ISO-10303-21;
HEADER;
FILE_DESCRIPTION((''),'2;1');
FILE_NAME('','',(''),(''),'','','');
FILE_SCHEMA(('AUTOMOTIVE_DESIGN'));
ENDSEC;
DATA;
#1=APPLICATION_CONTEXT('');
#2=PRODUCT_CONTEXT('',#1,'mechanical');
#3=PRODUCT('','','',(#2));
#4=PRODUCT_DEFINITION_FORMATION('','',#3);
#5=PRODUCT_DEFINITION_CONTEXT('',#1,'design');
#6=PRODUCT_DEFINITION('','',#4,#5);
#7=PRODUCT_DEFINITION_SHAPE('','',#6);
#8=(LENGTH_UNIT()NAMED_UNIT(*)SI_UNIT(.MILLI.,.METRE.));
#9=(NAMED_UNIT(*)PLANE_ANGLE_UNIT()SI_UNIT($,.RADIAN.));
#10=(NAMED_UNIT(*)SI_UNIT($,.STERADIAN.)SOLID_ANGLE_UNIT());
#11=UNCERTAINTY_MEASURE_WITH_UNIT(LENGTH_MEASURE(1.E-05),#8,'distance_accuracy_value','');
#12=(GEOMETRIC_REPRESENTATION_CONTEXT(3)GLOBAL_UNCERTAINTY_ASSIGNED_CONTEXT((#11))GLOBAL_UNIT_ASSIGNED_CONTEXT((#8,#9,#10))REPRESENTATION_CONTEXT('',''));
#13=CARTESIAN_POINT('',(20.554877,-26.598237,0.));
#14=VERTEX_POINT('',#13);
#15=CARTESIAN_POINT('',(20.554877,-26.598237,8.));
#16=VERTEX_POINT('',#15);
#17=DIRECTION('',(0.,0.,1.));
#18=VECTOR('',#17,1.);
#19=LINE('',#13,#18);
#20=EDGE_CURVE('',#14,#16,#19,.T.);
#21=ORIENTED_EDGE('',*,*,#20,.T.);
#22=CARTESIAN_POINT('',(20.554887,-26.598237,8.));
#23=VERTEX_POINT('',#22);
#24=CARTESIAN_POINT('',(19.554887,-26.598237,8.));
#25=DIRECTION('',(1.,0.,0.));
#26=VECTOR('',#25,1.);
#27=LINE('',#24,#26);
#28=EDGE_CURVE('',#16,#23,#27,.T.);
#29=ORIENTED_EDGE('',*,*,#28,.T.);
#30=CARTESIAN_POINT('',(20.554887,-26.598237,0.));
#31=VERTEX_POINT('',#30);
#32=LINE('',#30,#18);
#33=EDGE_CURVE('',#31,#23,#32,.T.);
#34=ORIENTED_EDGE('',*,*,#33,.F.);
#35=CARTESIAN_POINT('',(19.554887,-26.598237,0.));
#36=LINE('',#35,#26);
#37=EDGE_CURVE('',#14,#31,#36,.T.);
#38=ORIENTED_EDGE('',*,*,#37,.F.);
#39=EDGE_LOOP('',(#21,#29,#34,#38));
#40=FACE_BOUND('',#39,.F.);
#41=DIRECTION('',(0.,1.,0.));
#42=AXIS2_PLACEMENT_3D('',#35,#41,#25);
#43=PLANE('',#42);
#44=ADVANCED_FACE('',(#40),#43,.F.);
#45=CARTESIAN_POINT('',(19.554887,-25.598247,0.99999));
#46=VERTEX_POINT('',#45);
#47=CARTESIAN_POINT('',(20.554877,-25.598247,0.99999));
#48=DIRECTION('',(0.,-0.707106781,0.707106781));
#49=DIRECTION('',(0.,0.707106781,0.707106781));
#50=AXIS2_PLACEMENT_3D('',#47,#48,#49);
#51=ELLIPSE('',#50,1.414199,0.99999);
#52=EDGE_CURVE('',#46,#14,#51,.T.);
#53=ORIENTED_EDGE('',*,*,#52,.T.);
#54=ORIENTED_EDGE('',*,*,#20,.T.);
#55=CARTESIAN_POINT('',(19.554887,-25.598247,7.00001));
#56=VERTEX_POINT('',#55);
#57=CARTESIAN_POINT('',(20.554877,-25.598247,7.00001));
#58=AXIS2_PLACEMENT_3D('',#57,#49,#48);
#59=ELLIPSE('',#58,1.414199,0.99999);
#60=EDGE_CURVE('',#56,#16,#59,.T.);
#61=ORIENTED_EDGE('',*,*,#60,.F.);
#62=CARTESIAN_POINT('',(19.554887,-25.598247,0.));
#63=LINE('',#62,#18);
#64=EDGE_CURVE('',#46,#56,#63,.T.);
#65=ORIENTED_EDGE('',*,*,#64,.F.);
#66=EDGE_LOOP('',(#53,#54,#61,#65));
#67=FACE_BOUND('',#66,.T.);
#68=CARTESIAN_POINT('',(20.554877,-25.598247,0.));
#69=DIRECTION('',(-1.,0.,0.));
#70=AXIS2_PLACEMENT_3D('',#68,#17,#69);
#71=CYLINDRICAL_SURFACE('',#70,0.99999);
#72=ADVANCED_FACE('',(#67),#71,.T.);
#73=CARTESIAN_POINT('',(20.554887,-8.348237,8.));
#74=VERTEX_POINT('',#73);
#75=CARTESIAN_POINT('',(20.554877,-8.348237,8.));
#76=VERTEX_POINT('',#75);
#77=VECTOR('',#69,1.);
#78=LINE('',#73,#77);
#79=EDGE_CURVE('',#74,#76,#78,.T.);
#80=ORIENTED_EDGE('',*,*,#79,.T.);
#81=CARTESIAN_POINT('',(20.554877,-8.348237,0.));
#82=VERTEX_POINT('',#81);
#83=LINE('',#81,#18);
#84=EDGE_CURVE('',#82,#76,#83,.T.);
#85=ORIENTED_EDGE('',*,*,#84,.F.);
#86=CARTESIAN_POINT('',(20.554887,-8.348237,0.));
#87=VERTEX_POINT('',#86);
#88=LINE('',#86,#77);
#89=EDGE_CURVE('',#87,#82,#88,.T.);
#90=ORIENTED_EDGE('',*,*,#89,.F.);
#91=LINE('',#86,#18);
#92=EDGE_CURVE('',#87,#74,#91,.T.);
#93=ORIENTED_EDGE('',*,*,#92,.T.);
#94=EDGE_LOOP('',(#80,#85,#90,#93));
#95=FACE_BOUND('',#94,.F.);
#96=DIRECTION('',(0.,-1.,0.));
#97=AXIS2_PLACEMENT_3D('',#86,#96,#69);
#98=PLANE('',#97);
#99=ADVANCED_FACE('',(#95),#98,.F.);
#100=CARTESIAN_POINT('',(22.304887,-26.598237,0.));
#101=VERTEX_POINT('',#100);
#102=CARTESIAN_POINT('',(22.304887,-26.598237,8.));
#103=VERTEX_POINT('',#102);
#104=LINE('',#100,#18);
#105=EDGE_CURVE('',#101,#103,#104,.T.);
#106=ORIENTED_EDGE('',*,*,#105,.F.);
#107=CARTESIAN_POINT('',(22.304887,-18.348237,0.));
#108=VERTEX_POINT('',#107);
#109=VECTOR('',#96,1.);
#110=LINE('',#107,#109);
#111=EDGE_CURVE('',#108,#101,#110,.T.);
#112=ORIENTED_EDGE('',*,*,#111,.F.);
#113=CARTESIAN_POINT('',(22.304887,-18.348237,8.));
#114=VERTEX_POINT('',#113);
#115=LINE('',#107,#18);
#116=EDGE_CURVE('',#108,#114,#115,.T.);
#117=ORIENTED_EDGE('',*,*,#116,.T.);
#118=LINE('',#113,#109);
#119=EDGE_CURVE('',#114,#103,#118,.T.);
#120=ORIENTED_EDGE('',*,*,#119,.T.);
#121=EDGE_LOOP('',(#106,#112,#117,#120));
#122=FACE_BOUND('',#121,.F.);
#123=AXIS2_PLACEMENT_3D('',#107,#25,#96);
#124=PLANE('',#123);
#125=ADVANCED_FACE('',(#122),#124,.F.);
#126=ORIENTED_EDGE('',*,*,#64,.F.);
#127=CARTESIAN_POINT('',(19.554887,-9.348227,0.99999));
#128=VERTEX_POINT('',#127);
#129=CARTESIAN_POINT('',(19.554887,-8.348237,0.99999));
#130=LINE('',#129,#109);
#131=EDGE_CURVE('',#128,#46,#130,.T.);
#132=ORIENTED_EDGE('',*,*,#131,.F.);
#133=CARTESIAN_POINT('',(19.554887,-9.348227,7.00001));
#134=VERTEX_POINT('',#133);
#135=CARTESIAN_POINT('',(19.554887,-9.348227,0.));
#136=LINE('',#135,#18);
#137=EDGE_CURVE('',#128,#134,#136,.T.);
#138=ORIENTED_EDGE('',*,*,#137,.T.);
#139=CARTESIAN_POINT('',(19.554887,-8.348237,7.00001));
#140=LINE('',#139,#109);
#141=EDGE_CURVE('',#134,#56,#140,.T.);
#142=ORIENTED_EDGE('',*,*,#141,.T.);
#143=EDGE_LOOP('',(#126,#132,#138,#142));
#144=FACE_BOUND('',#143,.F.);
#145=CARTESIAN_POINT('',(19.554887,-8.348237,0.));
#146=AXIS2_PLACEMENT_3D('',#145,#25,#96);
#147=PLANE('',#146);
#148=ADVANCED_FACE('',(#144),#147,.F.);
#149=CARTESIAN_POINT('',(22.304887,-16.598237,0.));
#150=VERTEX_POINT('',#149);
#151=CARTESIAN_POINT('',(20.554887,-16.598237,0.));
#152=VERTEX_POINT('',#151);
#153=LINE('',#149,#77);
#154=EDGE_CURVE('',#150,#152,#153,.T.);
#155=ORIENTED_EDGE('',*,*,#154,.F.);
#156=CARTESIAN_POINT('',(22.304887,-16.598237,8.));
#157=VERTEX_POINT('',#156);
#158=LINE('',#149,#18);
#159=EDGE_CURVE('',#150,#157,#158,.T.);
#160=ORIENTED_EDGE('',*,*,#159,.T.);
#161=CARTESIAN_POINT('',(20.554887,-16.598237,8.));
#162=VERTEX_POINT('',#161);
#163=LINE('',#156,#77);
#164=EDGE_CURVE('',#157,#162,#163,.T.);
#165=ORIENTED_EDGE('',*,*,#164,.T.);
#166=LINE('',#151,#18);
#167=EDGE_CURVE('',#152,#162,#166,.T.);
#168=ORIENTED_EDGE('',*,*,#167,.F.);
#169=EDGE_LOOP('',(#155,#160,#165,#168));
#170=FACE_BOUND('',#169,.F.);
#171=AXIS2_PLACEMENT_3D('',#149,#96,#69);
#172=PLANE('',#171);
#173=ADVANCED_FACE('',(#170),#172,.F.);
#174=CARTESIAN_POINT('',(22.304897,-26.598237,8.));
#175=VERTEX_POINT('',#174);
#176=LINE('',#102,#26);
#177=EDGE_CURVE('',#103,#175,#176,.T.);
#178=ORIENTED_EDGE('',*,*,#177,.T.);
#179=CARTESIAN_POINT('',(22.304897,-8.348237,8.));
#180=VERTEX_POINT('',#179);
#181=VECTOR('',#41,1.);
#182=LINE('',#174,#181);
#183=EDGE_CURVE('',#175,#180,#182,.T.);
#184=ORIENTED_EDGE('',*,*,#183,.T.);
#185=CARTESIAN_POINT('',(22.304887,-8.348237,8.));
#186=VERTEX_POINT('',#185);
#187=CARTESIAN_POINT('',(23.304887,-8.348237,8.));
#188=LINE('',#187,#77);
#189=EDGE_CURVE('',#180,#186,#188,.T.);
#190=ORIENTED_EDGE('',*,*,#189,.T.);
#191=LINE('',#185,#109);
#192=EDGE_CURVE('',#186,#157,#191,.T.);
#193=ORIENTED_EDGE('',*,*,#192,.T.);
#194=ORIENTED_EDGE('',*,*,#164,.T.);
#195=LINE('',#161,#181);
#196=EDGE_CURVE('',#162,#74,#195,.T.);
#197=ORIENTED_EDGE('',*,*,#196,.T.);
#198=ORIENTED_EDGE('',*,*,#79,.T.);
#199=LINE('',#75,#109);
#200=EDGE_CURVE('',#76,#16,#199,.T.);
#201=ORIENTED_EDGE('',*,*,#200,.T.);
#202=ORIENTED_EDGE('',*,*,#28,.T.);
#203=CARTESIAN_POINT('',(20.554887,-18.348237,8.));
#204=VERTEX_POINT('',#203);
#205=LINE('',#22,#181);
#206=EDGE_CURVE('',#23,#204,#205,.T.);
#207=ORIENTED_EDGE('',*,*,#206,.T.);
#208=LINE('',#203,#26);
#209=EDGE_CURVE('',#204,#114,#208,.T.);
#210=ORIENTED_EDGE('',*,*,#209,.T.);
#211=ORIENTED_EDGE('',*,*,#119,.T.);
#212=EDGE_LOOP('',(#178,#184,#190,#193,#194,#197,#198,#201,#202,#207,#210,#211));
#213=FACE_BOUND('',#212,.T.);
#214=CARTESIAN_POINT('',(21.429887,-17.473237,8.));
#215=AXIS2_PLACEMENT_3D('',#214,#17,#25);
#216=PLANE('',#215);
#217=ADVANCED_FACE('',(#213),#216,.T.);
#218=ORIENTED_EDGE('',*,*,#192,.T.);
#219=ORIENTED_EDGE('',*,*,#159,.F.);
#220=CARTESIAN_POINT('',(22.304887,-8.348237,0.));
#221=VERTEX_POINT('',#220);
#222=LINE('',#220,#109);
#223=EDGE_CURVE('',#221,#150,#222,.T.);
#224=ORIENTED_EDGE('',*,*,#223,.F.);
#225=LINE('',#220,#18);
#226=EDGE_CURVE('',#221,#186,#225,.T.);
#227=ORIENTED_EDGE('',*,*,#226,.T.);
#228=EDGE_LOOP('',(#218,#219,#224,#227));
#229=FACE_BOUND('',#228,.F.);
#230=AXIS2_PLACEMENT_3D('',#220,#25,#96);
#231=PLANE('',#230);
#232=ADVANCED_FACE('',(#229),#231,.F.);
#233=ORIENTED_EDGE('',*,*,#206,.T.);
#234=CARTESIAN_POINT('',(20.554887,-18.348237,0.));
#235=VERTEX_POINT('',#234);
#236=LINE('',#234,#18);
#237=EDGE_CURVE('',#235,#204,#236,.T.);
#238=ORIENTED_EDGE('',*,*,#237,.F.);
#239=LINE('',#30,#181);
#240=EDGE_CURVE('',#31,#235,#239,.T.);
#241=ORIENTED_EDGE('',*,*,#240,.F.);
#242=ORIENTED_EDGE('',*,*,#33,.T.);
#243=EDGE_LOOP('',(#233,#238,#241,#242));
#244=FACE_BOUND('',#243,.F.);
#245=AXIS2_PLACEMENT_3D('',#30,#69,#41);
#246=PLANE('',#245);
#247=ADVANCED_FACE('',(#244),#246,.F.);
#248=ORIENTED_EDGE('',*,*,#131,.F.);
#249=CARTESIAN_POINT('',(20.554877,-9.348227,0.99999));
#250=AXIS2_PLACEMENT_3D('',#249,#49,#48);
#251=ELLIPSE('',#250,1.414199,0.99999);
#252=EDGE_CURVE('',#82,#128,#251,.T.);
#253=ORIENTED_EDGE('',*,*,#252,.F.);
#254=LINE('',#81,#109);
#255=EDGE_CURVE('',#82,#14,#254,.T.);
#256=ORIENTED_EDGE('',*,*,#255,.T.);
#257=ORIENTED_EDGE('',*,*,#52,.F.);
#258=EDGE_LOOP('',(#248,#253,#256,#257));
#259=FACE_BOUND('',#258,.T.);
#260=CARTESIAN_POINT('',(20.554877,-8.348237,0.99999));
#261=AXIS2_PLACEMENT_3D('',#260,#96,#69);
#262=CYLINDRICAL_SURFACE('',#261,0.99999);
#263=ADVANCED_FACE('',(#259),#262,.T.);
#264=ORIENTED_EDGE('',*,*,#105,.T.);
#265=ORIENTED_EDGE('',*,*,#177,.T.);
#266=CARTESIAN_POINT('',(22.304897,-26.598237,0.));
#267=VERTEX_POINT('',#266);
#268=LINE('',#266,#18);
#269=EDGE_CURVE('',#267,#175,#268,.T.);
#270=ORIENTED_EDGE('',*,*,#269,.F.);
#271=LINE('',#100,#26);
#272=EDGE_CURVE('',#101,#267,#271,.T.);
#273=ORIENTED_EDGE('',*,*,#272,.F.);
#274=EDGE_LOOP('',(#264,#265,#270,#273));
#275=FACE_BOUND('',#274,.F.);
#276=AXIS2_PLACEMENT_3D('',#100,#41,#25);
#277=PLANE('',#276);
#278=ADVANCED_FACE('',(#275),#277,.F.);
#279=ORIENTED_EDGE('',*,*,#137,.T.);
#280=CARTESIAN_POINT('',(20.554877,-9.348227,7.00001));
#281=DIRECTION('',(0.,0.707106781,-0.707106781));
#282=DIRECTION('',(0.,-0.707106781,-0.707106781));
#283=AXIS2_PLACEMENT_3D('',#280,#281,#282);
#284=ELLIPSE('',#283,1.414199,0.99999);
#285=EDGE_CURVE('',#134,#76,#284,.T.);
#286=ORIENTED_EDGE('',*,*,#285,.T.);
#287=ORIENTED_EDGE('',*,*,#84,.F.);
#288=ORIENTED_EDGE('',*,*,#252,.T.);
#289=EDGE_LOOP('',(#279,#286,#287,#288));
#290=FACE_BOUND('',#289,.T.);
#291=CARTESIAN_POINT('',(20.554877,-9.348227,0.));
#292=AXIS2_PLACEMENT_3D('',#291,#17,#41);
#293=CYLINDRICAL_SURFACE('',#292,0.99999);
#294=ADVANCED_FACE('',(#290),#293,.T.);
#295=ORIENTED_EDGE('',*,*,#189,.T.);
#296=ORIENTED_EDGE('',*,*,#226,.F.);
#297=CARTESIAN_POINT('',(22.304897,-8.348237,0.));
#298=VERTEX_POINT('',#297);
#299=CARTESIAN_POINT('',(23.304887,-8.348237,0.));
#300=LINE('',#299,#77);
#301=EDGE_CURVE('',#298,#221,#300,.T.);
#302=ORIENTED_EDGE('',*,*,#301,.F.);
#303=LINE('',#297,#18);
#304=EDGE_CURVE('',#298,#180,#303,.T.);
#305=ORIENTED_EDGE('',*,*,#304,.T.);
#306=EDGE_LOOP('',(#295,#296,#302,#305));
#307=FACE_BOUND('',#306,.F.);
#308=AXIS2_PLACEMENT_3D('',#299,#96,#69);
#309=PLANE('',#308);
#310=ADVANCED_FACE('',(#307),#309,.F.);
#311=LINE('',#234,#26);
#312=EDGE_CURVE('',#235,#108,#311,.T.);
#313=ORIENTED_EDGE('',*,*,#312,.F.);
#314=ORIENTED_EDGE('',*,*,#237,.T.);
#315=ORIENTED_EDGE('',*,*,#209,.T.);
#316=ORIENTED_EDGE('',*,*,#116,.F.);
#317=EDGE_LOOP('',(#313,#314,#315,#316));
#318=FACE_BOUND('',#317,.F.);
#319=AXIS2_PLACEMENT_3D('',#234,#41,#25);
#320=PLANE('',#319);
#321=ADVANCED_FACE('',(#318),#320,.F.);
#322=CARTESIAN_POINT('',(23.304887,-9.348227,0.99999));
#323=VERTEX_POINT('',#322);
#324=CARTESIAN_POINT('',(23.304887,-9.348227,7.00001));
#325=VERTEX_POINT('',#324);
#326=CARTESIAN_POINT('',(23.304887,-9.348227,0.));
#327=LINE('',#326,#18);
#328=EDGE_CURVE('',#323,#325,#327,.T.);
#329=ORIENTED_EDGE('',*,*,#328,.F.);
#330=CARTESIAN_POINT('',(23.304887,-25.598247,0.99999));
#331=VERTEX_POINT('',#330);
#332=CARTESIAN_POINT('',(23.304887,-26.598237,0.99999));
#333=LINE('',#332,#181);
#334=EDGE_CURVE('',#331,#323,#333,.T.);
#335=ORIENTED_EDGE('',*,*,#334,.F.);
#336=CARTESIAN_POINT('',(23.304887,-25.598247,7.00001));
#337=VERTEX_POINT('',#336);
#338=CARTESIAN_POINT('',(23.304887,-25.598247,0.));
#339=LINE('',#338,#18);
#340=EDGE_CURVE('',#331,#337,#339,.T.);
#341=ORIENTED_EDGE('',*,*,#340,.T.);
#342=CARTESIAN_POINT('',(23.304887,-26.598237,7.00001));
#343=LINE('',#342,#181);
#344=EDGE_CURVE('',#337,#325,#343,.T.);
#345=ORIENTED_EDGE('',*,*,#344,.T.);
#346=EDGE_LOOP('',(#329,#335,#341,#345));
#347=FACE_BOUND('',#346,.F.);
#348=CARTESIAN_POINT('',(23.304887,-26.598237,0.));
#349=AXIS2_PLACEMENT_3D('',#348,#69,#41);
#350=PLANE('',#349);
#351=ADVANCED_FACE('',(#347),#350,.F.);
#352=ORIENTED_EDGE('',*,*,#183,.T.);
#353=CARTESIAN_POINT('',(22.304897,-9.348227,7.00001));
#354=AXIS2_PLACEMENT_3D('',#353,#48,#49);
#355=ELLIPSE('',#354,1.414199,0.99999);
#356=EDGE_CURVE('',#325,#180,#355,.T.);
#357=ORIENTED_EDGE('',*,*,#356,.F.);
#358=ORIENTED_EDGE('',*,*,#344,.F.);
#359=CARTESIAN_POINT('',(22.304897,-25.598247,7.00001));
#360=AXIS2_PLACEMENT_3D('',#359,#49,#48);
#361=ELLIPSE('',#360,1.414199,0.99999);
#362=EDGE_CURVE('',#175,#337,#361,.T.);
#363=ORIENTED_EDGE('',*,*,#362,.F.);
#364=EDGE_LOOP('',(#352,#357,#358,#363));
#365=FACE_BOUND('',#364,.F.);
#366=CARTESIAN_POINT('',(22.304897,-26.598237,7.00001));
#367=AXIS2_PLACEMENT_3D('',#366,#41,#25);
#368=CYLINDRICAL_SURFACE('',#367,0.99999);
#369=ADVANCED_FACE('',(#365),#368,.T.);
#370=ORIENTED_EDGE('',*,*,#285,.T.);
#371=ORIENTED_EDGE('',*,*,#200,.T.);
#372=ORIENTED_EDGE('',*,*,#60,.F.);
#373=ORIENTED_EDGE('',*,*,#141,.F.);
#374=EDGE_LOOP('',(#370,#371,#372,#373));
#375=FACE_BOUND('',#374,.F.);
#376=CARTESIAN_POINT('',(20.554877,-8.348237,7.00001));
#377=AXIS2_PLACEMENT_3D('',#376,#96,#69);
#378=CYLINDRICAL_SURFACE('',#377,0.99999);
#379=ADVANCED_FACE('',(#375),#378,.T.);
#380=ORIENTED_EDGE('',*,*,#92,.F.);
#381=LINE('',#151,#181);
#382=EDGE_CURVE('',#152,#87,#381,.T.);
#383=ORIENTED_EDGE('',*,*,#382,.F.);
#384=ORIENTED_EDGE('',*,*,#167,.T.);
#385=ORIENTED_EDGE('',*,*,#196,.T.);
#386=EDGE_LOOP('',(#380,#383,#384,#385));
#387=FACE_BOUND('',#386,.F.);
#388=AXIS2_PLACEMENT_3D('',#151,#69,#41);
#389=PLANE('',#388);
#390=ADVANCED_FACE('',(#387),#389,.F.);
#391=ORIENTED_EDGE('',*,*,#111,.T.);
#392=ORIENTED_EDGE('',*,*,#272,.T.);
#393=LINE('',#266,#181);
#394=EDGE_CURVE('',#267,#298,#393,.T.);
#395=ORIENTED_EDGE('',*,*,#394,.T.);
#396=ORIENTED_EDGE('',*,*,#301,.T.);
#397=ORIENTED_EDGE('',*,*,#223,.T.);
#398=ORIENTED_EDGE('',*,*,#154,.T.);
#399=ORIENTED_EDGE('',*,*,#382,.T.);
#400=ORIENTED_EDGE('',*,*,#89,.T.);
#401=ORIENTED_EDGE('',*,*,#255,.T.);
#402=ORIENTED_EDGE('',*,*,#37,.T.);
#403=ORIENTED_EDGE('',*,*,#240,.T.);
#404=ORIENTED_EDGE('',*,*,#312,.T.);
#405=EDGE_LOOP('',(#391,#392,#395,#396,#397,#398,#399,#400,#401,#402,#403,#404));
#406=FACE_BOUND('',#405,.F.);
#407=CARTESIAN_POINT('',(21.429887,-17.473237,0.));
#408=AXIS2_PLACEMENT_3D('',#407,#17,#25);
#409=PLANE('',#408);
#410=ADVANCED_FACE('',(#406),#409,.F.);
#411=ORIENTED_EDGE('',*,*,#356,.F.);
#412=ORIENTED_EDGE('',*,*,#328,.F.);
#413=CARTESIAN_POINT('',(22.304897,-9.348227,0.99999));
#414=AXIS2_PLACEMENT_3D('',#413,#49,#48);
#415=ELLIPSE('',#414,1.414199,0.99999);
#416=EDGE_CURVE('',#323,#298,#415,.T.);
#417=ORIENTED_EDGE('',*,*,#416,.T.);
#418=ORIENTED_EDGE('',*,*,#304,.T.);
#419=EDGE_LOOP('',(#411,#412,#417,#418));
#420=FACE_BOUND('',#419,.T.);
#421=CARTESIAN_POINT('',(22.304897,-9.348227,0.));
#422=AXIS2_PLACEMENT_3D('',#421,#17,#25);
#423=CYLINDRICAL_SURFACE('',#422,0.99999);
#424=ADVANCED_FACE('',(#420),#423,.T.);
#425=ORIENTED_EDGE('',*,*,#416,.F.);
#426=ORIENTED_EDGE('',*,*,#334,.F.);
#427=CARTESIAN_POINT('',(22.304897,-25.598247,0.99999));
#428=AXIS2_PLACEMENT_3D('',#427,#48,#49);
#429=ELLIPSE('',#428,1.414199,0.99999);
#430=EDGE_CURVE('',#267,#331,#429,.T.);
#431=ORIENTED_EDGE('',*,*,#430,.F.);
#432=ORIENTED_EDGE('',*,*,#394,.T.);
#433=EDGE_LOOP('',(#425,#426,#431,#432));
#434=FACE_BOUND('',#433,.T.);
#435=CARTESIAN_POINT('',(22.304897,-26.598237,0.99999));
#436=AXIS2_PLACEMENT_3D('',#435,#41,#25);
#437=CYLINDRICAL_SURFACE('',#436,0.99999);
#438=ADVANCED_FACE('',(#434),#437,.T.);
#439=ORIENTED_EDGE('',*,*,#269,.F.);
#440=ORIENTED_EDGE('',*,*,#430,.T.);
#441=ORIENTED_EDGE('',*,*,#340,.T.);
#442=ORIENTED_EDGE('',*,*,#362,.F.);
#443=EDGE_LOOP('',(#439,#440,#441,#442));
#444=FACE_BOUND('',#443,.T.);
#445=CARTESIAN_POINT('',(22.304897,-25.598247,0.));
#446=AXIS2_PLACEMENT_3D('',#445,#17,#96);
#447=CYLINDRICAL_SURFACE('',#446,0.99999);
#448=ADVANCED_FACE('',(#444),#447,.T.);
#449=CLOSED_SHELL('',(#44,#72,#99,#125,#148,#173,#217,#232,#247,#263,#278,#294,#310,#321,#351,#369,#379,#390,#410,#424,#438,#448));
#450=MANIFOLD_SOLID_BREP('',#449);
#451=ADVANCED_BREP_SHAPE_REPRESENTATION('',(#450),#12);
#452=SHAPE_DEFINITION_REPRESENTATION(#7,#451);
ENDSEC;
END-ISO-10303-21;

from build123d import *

# Parameters (mm, degrees)
F1_DEPTH = 8
F2_R     = 0.99999


# Not quite as in the source:
# - a fillet or chamfer is up to 0.001 mm smaller than in the source, because OpenCascade refuses the exact size


with BuildPart() as f1:
    # F0 (on Top) → F1 (new body)
    with BuildSketch(Plane.XY):
        Polygon((20.5548869669, -26.5982374549), (20.5548869669, -18.3482374549), (22.3048869669, -18.3482374549), (22.3048869669, -26.5982374549), (23.3048869669, -26.5982374549), (23.3048869669, -18.3482374549), (23.3048869669, -8.3482374549), (22.3048869669, -8.3482374549), (22.3048869669, -16.5982374549), (20.5548869669, -16.5982374549), (20.5548869669, -8.3482374549), (19.5548869669, -8.3482374549), (19.5548869669, -18.3482374549), (19.5548869669, -26.5982374549), align=None)
    extrude(amount=F1_DEPTH)

    # F2 (radius 1 in the source; OpenCascade refuses exactly that, so slightly less here)
    f2_edges = [f1.edges().sort_by_distance(p)[0] for p in [
        (23.304887, -26.598237, 4),
        (23.304887, -17.473237, 8),
        (23.304887, -8.348237, 4),
        (23.304887, -17.473237, 0),
        (19.554887, -26.598237, 4),
        (19.554887, -17.473237, 8),
        (19.554887, -8.348237, 4),
        (19.554887, -17.473237, 0),
    ]]
    fillet(f2_edges, radius=F2_R)


solid = f1.part
